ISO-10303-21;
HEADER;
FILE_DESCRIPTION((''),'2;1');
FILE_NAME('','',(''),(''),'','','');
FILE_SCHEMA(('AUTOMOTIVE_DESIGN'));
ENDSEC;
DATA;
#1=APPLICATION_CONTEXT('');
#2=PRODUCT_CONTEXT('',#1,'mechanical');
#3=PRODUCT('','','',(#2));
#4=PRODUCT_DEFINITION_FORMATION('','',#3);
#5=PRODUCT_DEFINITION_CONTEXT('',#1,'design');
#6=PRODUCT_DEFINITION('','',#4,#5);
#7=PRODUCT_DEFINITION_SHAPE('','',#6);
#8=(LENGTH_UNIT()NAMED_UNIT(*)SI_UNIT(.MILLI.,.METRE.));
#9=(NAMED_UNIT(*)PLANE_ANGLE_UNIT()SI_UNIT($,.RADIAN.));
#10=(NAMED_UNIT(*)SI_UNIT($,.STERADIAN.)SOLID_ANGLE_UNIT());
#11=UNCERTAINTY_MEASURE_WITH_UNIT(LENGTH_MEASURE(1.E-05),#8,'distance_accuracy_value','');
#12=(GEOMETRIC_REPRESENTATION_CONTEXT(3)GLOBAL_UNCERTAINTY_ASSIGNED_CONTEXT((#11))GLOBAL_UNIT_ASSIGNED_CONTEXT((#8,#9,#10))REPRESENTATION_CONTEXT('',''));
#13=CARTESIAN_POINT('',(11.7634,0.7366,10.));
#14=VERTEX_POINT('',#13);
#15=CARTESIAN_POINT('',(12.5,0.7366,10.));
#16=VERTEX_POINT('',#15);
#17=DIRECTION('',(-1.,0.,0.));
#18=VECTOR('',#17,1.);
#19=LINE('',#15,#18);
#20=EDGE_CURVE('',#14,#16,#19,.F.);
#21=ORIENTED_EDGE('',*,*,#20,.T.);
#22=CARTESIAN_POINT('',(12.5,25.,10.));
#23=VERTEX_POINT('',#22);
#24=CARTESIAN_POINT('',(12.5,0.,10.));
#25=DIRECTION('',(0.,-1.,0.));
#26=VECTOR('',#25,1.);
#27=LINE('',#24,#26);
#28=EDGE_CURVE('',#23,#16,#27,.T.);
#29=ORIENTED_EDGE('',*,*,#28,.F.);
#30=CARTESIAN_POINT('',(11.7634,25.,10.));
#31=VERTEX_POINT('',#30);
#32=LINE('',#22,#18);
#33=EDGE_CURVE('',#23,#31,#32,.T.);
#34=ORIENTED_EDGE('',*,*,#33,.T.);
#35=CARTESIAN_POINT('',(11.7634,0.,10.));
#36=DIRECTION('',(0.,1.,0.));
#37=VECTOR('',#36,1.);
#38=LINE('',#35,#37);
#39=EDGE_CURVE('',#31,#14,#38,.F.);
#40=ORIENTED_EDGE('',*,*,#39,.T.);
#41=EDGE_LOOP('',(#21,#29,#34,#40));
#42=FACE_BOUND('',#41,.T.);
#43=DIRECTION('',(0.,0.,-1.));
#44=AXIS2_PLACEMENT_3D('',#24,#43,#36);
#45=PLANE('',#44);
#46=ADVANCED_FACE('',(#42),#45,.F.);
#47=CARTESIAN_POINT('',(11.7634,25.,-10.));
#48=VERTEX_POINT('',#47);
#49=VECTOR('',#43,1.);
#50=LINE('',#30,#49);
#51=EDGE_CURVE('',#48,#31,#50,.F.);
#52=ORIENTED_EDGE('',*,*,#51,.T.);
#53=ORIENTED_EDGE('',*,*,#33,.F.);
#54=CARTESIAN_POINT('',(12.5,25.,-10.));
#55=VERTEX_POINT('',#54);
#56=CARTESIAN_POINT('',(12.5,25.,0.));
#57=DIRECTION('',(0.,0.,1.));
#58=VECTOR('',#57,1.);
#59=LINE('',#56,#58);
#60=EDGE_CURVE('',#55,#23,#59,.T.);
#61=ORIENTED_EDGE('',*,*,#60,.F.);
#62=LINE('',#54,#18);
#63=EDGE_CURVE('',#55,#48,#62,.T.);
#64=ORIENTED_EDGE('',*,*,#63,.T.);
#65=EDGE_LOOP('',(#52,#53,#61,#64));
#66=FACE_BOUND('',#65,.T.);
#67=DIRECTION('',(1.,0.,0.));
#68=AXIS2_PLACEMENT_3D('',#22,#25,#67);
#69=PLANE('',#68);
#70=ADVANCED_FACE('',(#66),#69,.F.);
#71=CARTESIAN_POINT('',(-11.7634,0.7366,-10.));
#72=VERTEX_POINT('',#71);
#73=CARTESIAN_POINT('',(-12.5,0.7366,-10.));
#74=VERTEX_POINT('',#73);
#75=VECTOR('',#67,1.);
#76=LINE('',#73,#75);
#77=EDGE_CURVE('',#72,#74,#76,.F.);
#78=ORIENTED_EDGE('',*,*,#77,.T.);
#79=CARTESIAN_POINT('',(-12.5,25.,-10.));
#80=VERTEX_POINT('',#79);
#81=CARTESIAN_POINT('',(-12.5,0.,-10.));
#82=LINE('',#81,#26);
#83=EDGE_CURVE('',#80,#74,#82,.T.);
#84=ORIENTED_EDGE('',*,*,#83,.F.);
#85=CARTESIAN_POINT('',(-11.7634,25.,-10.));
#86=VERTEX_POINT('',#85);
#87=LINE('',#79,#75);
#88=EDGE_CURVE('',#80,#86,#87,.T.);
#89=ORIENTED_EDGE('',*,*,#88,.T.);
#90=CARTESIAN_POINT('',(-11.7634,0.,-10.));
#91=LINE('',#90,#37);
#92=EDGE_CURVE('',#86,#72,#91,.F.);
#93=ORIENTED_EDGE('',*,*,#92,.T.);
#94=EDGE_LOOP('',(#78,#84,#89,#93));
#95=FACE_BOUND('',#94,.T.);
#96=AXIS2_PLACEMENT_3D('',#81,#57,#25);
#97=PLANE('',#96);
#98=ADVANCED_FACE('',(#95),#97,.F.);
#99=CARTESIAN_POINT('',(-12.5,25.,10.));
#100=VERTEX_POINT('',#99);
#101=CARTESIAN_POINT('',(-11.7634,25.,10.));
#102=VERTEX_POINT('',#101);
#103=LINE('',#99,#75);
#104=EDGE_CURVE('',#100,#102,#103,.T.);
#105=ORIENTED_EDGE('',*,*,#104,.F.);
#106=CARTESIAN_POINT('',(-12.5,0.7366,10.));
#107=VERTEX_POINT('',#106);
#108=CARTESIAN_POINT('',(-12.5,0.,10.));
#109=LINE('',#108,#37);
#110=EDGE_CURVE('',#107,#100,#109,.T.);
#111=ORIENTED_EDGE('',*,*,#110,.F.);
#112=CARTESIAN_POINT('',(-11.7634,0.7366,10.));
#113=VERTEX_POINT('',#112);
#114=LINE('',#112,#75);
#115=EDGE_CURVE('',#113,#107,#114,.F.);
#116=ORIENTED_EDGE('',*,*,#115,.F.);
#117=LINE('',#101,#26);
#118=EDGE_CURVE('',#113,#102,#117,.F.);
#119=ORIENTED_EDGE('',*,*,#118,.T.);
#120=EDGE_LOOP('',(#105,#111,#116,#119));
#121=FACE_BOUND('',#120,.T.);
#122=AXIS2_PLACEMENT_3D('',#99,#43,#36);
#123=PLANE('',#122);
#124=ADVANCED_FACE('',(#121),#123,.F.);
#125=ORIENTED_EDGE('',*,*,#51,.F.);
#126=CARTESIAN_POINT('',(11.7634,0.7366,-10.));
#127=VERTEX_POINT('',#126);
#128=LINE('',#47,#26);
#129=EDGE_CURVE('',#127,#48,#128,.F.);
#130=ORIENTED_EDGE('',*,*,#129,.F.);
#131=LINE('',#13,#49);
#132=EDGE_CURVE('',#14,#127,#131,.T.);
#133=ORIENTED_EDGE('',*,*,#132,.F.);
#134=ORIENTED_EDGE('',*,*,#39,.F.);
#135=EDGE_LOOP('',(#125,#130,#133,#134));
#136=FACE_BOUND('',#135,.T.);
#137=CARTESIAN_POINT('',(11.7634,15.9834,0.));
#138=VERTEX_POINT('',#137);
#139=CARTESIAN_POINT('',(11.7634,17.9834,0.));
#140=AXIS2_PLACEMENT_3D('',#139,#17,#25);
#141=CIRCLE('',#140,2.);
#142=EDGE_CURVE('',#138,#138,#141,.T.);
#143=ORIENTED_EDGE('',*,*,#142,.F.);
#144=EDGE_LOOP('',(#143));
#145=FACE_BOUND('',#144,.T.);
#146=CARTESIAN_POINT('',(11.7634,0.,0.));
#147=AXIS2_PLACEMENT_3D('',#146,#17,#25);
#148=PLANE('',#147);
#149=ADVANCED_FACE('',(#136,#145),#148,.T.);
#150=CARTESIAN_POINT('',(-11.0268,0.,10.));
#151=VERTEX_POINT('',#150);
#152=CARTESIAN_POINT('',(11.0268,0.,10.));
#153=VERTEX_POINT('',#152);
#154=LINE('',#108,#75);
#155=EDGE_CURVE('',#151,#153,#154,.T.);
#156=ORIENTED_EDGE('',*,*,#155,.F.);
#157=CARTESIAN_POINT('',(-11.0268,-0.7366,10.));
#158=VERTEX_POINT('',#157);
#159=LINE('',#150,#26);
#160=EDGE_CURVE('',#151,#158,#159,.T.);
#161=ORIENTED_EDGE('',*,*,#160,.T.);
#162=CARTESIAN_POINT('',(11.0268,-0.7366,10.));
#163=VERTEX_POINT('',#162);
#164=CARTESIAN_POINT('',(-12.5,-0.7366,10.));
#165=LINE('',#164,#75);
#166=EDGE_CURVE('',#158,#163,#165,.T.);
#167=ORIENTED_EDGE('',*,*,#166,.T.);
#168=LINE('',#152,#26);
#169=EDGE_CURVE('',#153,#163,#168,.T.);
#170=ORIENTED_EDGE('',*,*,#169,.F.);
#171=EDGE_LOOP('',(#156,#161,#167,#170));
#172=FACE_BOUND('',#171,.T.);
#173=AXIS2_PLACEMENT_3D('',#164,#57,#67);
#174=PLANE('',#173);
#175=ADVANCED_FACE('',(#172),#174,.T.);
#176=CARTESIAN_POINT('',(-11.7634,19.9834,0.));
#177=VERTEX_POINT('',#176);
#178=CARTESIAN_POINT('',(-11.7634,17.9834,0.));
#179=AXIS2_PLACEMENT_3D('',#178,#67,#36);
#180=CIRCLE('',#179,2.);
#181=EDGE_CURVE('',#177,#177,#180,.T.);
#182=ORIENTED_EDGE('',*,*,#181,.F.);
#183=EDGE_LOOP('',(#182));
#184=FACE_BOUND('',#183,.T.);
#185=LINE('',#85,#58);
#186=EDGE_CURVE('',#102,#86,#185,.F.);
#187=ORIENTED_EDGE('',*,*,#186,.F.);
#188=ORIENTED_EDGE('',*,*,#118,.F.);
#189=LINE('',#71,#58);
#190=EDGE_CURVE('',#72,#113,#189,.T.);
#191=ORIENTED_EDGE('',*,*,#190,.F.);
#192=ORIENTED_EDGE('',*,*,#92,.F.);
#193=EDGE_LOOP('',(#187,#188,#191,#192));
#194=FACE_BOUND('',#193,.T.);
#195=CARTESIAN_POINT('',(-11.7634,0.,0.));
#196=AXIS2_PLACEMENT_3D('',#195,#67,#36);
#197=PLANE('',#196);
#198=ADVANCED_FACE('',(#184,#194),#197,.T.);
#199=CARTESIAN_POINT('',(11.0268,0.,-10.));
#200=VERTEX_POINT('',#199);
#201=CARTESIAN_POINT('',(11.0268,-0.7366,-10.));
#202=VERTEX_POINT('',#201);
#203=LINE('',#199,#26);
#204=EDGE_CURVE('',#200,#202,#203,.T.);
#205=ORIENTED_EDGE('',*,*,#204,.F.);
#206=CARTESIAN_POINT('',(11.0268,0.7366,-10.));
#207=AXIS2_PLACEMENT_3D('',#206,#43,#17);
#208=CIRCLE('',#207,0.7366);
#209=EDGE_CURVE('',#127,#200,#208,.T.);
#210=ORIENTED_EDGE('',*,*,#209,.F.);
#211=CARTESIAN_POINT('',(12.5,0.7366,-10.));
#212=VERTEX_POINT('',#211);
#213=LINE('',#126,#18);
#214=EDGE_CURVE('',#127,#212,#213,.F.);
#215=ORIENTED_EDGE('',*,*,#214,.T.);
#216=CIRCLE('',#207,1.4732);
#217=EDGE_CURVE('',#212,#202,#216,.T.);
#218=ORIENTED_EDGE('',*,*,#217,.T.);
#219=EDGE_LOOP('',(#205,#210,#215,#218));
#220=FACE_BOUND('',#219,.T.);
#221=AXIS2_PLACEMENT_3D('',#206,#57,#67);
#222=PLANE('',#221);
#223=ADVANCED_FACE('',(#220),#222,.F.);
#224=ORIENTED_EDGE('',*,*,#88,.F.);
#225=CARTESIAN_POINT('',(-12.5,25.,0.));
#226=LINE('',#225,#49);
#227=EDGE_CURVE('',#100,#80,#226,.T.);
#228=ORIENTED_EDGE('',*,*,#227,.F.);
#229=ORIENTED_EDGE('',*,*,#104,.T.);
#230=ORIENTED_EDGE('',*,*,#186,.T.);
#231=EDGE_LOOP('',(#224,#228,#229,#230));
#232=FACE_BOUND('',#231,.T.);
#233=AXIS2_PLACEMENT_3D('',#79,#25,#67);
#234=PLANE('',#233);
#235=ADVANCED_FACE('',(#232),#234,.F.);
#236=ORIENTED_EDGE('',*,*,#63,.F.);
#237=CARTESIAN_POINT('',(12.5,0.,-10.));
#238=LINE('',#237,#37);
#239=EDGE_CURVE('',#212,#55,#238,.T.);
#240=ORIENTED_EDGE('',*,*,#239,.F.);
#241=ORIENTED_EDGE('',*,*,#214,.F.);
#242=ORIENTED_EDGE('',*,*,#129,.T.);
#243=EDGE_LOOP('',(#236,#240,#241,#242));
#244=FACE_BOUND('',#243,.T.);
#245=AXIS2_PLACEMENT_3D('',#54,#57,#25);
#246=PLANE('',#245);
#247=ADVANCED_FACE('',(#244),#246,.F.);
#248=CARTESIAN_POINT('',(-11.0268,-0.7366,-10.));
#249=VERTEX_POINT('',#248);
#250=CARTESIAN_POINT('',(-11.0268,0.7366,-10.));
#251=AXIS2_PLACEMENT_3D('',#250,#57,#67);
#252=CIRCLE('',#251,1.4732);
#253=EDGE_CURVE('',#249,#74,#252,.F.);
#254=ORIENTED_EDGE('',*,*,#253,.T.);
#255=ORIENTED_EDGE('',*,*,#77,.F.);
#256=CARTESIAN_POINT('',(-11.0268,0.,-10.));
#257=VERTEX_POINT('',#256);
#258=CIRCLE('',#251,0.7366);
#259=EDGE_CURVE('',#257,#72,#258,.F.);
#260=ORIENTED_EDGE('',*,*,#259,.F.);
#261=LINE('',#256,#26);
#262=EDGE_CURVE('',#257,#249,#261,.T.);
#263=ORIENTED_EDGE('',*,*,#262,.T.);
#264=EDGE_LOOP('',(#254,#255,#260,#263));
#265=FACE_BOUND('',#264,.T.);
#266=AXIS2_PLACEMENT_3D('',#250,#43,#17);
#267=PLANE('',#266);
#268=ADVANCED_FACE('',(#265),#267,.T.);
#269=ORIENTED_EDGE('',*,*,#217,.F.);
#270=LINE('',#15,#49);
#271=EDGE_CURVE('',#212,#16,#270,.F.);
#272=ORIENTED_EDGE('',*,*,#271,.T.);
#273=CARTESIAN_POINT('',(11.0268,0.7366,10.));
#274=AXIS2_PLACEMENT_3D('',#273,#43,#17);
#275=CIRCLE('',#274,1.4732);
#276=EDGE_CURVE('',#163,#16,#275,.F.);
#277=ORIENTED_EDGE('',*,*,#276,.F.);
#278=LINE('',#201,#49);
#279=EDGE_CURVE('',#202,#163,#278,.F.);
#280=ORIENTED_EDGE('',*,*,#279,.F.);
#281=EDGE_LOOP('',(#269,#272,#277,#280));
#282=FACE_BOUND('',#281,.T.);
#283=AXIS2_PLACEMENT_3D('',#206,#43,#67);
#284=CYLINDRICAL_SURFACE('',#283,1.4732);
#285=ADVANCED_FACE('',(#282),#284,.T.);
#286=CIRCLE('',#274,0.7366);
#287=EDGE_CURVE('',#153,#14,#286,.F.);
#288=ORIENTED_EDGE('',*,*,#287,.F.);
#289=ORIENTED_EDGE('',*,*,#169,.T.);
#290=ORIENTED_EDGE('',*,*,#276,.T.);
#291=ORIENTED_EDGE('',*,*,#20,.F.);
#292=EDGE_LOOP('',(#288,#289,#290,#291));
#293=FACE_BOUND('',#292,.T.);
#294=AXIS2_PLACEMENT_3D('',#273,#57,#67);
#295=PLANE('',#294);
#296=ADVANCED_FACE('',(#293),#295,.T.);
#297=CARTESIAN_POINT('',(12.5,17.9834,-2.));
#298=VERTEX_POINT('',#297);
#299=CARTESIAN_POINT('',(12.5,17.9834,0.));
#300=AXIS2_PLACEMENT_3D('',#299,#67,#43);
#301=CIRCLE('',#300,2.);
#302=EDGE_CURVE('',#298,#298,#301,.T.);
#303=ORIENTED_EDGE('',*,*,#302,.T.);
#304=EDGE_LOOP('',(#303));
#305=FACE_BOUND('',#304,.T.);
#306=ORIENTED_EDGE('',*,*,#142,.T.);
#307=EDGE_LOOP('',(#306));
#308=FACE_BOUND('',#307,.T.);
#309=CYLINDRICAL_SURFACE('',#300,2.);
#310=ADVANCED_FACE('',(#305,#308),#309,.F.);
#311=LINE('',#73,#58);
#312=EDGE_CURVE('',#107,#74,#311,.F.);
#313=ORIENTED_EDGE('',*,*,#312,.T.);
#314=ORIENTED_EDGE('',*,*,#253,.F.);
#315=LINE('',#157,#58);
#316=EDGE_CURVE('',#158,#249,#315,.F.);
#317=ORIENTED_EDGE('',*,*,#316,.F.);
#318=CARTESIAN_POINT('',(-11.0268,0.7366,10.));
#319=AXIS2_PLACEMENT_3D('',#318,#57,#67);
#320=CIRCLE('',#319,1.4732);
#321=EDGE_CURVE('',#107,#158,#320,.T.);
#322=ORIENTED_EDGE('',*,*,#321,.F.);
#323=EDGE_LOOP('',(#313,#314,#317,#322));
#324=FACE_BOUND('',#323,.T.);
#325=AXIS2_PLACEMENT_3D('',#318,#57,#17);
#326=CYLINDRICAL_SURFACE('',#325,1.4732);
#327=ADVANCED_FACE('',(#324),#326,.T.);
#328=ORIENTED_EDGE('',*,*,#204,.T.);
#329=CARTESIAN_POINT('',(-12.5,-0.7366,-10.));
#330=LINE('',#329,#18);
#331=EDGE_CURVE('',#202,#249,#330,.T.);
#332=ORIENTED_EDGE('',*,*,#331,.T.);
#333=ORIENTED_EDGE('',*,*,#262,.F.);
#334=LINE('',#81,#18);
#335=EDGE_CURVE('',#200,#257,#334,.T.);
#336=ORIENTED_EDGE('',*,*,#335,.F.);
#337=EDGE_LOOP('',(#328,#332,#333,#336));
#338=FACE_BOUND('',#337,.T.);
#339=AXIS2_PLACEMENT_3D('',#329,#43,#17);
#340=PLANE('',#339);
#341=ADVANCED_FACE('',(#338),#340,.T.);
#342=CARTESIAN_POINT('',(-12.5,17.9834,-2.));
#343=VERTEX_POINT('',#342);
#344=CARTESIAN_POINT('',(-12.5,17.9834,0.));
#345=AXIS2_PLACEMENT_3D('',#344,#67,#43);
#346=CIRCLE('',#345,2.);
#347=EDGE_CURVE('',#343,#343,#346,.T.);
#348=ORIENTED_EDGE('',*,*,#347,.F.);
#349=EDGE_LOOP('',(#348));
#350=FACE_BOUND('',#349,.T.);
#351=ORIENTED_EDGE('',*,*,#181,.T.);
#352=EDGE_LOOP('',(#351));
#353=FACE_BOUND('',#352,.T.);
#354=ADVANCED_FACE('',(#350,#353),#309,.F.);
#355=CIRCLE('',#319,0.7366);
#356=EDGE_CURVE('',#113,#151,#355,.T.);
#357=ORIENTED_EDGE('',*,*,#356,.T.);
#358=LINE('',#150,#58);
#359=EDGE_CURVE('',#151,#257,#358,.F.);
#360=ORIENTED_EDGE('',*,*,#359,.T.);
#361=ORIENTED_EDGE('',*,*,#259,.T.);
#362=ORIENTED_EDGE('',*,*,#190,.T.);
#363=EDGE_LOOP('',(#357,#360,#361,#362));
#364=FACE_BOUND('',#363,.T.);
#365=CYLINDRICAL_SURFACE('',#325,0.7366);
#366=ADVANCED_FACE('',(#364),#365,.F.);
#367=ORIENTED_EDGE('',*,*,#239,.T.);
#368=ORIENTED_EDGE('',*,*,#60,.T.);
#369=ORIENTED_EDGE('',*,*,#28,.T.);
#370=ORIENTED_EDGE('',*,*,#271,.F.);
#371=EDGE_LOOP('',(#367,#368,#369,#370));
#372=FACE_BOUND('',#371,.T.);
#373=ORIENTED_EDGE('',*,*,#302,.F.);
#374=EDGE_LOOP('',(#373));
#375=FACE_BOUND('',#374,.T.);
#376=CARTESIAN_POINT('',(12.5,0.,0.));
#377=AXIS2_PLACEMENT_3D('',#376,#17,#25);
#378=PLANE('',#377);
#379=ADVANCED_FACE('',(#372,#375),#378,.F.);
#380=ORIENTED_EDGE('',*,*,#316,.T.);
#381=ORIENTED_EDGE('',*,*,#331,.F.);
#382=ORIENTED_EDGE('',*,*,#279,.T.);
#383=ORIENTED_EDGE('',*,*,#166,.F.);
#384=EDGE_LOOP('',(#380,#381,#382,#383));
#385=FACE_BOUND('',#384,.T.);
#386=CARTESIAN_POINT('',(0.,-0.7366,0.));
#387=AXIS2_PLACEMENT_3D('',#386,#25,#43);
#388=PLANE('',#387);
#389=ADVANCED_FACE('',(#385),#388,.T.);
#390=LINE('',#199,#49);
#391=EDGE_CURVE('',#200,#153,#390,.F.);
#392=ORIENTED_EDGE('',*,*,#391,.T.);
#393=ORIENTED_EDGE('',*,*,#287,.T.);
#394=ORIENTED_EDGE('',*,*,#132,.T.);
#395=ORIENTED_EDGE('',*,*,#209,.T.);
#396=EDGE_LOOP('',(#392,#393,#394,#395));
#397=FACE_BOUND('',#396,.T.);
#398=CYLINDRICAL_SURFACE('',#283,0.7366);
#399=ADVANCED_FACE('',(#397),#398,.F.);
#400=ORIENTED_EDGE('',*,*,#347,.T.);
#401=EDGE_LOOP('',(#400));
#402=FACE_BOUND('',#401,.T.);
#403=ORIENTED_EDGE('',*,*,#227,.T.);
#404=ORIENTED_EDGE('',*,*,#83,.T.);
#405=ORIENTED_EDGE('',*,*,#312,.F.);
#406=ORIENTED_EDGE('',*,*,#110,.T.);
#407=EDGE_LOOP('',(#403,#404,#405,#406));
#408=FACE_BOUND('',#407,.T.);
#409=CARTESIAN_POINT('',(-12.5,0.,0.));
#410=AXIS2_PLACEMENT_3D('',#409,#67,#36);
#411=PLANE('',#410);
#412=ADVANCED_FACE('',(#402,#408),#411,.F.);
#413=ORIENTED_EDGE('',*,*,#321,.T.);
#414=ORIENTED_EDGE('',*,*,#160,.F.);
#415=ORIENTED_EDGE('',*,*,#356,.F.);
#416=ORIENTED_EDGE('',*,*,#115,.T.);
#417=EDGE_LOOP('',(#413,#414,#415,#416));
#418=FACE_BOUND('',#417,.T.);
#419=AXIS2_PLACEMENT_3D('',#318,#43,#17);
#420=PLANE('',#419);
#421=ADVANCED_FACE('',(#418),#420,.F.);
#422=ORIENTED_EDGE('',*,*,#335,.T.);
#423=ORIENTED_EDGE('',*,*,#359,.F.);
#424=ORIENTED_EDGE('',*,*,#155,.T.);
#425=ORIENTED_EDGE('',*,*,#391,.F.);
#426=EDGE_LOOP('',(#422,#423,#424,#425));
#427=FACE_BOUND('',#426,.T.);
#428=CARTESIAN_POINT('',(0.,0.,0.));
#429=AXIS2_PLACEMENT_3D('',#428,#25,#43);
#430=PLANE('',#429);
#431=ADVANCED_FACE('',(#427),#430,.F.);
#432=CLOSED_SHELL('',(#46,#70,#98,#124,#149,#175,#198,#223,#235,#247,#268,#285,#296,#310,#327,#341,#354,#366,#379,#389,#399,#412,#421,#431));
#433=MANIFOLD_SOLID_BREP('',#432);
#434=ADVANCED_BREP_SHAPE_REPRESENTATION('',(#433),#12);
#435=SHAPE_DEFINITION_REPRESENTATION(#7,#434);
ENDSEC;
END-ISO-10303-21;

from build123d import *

# Parameters (mm, degrees)
SKETCH1_W                      = 25
SKETCH1_H                      = 20
BASE_FLANGE1_DEPTH             = 0.7366
EDGE_FLANGE1_STRIP_W           = 4.4196
EDGE_FLANGE1_STRIP_H           = 0.7366
EDGE_FLANGE1_STRIP_CUT_DEPTH   = 20
EDGE_FLANGE1_STRIP_2_W         = 4.4196
EDGE_FLANGE1_STRIP_2_H         = 0.7366
EDGE_FLANGE1_STRIP_CUT_2_DEPTH = 20
EDGE_FLANGE1_DEPTH             = 20
EDGE_FLANGE1_BEND_DEPTH        = 20
F_4_0_4_DIAMETER_HOLE1_D       = 4


# Sheet-metal steps are written as plain solids
with BuildPart() as part:
    # Sketch1 → Base-Flange1 (new body)
    with BuildSketch(Plane(origin=(0, 0, 0), x_dir=(1, 0, 0), z_dir=(0, 1, 0))):
        Rectangle(SKETCH1_W, SKETCH1_H)
    extrude(amount=-BASE_FLANGE1_DEPTH)

    # Edge-Flange1 strip (across the edge) → Edge-Flange1 strip cut (cut)
    with BuildSketch(Plane(origin=(12.5, 0, 10), x_dir=(-1, 0, 0), z_dir=(0, 0, -1))):
        with Locations((-0.7366, -0.3683)):
            Rectangle(EDGE_FLANGE1_STRIP_W, EDGE_FLANGE1_STRIP_H)
    extrude(amount=EDGE_FLANGE1_STRIP_CUT_DEPTH, mode=Mode.SUBTRACT)

    # Edge-Flange1 strip 2 (across the edge) → Edge-Flange1 strip cut 2 (cut)
    with BuildSketch(Plane(origin=(-12.5, 0, -10), x_dir=(1, 0, 0), z_dir=(0, 0, 1))):
        with Locations((-0.7366, -0.3683)):
            Rectangle(EDGE_FLANGE1_STRIP_2_W, EDGE_FLANGE1_STRIP_2_H)
    extrude(amount=EDGE_FLANGE1_STRIP_CUT_2_DEPTH, mode=Mode.SUBTRACT)

    # Edge-Flange1 section (across the edge) → Edge-Flange1 (add)
    with BuildSketch(Plane(origin=(12.5, 0, 10), x_dir=(-1, 0, 0), z_dir=(0, 0, -1))):
        with BuildLine():
            Line((0, 0.7366), (0, 25))
            Line((0, 25), (0.7366, 25))
            Line((0.7366, 25), (0.7366, 0.7366))
            ThreePointArc((0.7366, 0.7366), (0.952345145, 0.215745145), (1.4732, 0))
            Line((1.4732, 0), (1.4732, -0.7366))
            ThreePointArc((1.4732, -0.7366), (0.43149029, -0.30510971), (0, 0.7366))
        make_face()
    extrude(amount=EDGE_FLANGE1_DEPTH)

    # Edge-Flange1 section 2 (across the edge) → Edge-Flange1 bend (add)
    with BuildSketch(Plane(origin=(-12.5, 0, -10), x_dir=(1, 0, 0), z_dir=(0, 0, 1))):
        with BuildLine():
            Line((0, 0.7366), (0, 25))
            Line((0, 25), (0.7366, 25))
            Line((0.7366, 25), (0.7366, 0.7366))
            ThreePointArc((0.7366, 0.7366), (0.952345145, 0.215745145), (1.4732, 0))
            Line((1.4732, 0), (1.4732, -0.7366))
            ThreePointArc((1.4732, -0.7366), (0.43149029, -0.30510971), (0, 0.7366))
        make_face()
    extrude(amount=EDGE_FLANGE1_BEND_DEPTH)

    # Ø4.0 (4) Diameter Hole1 (through all)
    with Locations(Plane(origin=(12.5, 0, 0), x_dir=(0, 0, -1), z_dir=(1, 0, 0))):
        with Locations((0, 17.9834)):
            Hole(F_4_0_4_DIAMETER_HOLE1_D / 2)


solid = part.part
